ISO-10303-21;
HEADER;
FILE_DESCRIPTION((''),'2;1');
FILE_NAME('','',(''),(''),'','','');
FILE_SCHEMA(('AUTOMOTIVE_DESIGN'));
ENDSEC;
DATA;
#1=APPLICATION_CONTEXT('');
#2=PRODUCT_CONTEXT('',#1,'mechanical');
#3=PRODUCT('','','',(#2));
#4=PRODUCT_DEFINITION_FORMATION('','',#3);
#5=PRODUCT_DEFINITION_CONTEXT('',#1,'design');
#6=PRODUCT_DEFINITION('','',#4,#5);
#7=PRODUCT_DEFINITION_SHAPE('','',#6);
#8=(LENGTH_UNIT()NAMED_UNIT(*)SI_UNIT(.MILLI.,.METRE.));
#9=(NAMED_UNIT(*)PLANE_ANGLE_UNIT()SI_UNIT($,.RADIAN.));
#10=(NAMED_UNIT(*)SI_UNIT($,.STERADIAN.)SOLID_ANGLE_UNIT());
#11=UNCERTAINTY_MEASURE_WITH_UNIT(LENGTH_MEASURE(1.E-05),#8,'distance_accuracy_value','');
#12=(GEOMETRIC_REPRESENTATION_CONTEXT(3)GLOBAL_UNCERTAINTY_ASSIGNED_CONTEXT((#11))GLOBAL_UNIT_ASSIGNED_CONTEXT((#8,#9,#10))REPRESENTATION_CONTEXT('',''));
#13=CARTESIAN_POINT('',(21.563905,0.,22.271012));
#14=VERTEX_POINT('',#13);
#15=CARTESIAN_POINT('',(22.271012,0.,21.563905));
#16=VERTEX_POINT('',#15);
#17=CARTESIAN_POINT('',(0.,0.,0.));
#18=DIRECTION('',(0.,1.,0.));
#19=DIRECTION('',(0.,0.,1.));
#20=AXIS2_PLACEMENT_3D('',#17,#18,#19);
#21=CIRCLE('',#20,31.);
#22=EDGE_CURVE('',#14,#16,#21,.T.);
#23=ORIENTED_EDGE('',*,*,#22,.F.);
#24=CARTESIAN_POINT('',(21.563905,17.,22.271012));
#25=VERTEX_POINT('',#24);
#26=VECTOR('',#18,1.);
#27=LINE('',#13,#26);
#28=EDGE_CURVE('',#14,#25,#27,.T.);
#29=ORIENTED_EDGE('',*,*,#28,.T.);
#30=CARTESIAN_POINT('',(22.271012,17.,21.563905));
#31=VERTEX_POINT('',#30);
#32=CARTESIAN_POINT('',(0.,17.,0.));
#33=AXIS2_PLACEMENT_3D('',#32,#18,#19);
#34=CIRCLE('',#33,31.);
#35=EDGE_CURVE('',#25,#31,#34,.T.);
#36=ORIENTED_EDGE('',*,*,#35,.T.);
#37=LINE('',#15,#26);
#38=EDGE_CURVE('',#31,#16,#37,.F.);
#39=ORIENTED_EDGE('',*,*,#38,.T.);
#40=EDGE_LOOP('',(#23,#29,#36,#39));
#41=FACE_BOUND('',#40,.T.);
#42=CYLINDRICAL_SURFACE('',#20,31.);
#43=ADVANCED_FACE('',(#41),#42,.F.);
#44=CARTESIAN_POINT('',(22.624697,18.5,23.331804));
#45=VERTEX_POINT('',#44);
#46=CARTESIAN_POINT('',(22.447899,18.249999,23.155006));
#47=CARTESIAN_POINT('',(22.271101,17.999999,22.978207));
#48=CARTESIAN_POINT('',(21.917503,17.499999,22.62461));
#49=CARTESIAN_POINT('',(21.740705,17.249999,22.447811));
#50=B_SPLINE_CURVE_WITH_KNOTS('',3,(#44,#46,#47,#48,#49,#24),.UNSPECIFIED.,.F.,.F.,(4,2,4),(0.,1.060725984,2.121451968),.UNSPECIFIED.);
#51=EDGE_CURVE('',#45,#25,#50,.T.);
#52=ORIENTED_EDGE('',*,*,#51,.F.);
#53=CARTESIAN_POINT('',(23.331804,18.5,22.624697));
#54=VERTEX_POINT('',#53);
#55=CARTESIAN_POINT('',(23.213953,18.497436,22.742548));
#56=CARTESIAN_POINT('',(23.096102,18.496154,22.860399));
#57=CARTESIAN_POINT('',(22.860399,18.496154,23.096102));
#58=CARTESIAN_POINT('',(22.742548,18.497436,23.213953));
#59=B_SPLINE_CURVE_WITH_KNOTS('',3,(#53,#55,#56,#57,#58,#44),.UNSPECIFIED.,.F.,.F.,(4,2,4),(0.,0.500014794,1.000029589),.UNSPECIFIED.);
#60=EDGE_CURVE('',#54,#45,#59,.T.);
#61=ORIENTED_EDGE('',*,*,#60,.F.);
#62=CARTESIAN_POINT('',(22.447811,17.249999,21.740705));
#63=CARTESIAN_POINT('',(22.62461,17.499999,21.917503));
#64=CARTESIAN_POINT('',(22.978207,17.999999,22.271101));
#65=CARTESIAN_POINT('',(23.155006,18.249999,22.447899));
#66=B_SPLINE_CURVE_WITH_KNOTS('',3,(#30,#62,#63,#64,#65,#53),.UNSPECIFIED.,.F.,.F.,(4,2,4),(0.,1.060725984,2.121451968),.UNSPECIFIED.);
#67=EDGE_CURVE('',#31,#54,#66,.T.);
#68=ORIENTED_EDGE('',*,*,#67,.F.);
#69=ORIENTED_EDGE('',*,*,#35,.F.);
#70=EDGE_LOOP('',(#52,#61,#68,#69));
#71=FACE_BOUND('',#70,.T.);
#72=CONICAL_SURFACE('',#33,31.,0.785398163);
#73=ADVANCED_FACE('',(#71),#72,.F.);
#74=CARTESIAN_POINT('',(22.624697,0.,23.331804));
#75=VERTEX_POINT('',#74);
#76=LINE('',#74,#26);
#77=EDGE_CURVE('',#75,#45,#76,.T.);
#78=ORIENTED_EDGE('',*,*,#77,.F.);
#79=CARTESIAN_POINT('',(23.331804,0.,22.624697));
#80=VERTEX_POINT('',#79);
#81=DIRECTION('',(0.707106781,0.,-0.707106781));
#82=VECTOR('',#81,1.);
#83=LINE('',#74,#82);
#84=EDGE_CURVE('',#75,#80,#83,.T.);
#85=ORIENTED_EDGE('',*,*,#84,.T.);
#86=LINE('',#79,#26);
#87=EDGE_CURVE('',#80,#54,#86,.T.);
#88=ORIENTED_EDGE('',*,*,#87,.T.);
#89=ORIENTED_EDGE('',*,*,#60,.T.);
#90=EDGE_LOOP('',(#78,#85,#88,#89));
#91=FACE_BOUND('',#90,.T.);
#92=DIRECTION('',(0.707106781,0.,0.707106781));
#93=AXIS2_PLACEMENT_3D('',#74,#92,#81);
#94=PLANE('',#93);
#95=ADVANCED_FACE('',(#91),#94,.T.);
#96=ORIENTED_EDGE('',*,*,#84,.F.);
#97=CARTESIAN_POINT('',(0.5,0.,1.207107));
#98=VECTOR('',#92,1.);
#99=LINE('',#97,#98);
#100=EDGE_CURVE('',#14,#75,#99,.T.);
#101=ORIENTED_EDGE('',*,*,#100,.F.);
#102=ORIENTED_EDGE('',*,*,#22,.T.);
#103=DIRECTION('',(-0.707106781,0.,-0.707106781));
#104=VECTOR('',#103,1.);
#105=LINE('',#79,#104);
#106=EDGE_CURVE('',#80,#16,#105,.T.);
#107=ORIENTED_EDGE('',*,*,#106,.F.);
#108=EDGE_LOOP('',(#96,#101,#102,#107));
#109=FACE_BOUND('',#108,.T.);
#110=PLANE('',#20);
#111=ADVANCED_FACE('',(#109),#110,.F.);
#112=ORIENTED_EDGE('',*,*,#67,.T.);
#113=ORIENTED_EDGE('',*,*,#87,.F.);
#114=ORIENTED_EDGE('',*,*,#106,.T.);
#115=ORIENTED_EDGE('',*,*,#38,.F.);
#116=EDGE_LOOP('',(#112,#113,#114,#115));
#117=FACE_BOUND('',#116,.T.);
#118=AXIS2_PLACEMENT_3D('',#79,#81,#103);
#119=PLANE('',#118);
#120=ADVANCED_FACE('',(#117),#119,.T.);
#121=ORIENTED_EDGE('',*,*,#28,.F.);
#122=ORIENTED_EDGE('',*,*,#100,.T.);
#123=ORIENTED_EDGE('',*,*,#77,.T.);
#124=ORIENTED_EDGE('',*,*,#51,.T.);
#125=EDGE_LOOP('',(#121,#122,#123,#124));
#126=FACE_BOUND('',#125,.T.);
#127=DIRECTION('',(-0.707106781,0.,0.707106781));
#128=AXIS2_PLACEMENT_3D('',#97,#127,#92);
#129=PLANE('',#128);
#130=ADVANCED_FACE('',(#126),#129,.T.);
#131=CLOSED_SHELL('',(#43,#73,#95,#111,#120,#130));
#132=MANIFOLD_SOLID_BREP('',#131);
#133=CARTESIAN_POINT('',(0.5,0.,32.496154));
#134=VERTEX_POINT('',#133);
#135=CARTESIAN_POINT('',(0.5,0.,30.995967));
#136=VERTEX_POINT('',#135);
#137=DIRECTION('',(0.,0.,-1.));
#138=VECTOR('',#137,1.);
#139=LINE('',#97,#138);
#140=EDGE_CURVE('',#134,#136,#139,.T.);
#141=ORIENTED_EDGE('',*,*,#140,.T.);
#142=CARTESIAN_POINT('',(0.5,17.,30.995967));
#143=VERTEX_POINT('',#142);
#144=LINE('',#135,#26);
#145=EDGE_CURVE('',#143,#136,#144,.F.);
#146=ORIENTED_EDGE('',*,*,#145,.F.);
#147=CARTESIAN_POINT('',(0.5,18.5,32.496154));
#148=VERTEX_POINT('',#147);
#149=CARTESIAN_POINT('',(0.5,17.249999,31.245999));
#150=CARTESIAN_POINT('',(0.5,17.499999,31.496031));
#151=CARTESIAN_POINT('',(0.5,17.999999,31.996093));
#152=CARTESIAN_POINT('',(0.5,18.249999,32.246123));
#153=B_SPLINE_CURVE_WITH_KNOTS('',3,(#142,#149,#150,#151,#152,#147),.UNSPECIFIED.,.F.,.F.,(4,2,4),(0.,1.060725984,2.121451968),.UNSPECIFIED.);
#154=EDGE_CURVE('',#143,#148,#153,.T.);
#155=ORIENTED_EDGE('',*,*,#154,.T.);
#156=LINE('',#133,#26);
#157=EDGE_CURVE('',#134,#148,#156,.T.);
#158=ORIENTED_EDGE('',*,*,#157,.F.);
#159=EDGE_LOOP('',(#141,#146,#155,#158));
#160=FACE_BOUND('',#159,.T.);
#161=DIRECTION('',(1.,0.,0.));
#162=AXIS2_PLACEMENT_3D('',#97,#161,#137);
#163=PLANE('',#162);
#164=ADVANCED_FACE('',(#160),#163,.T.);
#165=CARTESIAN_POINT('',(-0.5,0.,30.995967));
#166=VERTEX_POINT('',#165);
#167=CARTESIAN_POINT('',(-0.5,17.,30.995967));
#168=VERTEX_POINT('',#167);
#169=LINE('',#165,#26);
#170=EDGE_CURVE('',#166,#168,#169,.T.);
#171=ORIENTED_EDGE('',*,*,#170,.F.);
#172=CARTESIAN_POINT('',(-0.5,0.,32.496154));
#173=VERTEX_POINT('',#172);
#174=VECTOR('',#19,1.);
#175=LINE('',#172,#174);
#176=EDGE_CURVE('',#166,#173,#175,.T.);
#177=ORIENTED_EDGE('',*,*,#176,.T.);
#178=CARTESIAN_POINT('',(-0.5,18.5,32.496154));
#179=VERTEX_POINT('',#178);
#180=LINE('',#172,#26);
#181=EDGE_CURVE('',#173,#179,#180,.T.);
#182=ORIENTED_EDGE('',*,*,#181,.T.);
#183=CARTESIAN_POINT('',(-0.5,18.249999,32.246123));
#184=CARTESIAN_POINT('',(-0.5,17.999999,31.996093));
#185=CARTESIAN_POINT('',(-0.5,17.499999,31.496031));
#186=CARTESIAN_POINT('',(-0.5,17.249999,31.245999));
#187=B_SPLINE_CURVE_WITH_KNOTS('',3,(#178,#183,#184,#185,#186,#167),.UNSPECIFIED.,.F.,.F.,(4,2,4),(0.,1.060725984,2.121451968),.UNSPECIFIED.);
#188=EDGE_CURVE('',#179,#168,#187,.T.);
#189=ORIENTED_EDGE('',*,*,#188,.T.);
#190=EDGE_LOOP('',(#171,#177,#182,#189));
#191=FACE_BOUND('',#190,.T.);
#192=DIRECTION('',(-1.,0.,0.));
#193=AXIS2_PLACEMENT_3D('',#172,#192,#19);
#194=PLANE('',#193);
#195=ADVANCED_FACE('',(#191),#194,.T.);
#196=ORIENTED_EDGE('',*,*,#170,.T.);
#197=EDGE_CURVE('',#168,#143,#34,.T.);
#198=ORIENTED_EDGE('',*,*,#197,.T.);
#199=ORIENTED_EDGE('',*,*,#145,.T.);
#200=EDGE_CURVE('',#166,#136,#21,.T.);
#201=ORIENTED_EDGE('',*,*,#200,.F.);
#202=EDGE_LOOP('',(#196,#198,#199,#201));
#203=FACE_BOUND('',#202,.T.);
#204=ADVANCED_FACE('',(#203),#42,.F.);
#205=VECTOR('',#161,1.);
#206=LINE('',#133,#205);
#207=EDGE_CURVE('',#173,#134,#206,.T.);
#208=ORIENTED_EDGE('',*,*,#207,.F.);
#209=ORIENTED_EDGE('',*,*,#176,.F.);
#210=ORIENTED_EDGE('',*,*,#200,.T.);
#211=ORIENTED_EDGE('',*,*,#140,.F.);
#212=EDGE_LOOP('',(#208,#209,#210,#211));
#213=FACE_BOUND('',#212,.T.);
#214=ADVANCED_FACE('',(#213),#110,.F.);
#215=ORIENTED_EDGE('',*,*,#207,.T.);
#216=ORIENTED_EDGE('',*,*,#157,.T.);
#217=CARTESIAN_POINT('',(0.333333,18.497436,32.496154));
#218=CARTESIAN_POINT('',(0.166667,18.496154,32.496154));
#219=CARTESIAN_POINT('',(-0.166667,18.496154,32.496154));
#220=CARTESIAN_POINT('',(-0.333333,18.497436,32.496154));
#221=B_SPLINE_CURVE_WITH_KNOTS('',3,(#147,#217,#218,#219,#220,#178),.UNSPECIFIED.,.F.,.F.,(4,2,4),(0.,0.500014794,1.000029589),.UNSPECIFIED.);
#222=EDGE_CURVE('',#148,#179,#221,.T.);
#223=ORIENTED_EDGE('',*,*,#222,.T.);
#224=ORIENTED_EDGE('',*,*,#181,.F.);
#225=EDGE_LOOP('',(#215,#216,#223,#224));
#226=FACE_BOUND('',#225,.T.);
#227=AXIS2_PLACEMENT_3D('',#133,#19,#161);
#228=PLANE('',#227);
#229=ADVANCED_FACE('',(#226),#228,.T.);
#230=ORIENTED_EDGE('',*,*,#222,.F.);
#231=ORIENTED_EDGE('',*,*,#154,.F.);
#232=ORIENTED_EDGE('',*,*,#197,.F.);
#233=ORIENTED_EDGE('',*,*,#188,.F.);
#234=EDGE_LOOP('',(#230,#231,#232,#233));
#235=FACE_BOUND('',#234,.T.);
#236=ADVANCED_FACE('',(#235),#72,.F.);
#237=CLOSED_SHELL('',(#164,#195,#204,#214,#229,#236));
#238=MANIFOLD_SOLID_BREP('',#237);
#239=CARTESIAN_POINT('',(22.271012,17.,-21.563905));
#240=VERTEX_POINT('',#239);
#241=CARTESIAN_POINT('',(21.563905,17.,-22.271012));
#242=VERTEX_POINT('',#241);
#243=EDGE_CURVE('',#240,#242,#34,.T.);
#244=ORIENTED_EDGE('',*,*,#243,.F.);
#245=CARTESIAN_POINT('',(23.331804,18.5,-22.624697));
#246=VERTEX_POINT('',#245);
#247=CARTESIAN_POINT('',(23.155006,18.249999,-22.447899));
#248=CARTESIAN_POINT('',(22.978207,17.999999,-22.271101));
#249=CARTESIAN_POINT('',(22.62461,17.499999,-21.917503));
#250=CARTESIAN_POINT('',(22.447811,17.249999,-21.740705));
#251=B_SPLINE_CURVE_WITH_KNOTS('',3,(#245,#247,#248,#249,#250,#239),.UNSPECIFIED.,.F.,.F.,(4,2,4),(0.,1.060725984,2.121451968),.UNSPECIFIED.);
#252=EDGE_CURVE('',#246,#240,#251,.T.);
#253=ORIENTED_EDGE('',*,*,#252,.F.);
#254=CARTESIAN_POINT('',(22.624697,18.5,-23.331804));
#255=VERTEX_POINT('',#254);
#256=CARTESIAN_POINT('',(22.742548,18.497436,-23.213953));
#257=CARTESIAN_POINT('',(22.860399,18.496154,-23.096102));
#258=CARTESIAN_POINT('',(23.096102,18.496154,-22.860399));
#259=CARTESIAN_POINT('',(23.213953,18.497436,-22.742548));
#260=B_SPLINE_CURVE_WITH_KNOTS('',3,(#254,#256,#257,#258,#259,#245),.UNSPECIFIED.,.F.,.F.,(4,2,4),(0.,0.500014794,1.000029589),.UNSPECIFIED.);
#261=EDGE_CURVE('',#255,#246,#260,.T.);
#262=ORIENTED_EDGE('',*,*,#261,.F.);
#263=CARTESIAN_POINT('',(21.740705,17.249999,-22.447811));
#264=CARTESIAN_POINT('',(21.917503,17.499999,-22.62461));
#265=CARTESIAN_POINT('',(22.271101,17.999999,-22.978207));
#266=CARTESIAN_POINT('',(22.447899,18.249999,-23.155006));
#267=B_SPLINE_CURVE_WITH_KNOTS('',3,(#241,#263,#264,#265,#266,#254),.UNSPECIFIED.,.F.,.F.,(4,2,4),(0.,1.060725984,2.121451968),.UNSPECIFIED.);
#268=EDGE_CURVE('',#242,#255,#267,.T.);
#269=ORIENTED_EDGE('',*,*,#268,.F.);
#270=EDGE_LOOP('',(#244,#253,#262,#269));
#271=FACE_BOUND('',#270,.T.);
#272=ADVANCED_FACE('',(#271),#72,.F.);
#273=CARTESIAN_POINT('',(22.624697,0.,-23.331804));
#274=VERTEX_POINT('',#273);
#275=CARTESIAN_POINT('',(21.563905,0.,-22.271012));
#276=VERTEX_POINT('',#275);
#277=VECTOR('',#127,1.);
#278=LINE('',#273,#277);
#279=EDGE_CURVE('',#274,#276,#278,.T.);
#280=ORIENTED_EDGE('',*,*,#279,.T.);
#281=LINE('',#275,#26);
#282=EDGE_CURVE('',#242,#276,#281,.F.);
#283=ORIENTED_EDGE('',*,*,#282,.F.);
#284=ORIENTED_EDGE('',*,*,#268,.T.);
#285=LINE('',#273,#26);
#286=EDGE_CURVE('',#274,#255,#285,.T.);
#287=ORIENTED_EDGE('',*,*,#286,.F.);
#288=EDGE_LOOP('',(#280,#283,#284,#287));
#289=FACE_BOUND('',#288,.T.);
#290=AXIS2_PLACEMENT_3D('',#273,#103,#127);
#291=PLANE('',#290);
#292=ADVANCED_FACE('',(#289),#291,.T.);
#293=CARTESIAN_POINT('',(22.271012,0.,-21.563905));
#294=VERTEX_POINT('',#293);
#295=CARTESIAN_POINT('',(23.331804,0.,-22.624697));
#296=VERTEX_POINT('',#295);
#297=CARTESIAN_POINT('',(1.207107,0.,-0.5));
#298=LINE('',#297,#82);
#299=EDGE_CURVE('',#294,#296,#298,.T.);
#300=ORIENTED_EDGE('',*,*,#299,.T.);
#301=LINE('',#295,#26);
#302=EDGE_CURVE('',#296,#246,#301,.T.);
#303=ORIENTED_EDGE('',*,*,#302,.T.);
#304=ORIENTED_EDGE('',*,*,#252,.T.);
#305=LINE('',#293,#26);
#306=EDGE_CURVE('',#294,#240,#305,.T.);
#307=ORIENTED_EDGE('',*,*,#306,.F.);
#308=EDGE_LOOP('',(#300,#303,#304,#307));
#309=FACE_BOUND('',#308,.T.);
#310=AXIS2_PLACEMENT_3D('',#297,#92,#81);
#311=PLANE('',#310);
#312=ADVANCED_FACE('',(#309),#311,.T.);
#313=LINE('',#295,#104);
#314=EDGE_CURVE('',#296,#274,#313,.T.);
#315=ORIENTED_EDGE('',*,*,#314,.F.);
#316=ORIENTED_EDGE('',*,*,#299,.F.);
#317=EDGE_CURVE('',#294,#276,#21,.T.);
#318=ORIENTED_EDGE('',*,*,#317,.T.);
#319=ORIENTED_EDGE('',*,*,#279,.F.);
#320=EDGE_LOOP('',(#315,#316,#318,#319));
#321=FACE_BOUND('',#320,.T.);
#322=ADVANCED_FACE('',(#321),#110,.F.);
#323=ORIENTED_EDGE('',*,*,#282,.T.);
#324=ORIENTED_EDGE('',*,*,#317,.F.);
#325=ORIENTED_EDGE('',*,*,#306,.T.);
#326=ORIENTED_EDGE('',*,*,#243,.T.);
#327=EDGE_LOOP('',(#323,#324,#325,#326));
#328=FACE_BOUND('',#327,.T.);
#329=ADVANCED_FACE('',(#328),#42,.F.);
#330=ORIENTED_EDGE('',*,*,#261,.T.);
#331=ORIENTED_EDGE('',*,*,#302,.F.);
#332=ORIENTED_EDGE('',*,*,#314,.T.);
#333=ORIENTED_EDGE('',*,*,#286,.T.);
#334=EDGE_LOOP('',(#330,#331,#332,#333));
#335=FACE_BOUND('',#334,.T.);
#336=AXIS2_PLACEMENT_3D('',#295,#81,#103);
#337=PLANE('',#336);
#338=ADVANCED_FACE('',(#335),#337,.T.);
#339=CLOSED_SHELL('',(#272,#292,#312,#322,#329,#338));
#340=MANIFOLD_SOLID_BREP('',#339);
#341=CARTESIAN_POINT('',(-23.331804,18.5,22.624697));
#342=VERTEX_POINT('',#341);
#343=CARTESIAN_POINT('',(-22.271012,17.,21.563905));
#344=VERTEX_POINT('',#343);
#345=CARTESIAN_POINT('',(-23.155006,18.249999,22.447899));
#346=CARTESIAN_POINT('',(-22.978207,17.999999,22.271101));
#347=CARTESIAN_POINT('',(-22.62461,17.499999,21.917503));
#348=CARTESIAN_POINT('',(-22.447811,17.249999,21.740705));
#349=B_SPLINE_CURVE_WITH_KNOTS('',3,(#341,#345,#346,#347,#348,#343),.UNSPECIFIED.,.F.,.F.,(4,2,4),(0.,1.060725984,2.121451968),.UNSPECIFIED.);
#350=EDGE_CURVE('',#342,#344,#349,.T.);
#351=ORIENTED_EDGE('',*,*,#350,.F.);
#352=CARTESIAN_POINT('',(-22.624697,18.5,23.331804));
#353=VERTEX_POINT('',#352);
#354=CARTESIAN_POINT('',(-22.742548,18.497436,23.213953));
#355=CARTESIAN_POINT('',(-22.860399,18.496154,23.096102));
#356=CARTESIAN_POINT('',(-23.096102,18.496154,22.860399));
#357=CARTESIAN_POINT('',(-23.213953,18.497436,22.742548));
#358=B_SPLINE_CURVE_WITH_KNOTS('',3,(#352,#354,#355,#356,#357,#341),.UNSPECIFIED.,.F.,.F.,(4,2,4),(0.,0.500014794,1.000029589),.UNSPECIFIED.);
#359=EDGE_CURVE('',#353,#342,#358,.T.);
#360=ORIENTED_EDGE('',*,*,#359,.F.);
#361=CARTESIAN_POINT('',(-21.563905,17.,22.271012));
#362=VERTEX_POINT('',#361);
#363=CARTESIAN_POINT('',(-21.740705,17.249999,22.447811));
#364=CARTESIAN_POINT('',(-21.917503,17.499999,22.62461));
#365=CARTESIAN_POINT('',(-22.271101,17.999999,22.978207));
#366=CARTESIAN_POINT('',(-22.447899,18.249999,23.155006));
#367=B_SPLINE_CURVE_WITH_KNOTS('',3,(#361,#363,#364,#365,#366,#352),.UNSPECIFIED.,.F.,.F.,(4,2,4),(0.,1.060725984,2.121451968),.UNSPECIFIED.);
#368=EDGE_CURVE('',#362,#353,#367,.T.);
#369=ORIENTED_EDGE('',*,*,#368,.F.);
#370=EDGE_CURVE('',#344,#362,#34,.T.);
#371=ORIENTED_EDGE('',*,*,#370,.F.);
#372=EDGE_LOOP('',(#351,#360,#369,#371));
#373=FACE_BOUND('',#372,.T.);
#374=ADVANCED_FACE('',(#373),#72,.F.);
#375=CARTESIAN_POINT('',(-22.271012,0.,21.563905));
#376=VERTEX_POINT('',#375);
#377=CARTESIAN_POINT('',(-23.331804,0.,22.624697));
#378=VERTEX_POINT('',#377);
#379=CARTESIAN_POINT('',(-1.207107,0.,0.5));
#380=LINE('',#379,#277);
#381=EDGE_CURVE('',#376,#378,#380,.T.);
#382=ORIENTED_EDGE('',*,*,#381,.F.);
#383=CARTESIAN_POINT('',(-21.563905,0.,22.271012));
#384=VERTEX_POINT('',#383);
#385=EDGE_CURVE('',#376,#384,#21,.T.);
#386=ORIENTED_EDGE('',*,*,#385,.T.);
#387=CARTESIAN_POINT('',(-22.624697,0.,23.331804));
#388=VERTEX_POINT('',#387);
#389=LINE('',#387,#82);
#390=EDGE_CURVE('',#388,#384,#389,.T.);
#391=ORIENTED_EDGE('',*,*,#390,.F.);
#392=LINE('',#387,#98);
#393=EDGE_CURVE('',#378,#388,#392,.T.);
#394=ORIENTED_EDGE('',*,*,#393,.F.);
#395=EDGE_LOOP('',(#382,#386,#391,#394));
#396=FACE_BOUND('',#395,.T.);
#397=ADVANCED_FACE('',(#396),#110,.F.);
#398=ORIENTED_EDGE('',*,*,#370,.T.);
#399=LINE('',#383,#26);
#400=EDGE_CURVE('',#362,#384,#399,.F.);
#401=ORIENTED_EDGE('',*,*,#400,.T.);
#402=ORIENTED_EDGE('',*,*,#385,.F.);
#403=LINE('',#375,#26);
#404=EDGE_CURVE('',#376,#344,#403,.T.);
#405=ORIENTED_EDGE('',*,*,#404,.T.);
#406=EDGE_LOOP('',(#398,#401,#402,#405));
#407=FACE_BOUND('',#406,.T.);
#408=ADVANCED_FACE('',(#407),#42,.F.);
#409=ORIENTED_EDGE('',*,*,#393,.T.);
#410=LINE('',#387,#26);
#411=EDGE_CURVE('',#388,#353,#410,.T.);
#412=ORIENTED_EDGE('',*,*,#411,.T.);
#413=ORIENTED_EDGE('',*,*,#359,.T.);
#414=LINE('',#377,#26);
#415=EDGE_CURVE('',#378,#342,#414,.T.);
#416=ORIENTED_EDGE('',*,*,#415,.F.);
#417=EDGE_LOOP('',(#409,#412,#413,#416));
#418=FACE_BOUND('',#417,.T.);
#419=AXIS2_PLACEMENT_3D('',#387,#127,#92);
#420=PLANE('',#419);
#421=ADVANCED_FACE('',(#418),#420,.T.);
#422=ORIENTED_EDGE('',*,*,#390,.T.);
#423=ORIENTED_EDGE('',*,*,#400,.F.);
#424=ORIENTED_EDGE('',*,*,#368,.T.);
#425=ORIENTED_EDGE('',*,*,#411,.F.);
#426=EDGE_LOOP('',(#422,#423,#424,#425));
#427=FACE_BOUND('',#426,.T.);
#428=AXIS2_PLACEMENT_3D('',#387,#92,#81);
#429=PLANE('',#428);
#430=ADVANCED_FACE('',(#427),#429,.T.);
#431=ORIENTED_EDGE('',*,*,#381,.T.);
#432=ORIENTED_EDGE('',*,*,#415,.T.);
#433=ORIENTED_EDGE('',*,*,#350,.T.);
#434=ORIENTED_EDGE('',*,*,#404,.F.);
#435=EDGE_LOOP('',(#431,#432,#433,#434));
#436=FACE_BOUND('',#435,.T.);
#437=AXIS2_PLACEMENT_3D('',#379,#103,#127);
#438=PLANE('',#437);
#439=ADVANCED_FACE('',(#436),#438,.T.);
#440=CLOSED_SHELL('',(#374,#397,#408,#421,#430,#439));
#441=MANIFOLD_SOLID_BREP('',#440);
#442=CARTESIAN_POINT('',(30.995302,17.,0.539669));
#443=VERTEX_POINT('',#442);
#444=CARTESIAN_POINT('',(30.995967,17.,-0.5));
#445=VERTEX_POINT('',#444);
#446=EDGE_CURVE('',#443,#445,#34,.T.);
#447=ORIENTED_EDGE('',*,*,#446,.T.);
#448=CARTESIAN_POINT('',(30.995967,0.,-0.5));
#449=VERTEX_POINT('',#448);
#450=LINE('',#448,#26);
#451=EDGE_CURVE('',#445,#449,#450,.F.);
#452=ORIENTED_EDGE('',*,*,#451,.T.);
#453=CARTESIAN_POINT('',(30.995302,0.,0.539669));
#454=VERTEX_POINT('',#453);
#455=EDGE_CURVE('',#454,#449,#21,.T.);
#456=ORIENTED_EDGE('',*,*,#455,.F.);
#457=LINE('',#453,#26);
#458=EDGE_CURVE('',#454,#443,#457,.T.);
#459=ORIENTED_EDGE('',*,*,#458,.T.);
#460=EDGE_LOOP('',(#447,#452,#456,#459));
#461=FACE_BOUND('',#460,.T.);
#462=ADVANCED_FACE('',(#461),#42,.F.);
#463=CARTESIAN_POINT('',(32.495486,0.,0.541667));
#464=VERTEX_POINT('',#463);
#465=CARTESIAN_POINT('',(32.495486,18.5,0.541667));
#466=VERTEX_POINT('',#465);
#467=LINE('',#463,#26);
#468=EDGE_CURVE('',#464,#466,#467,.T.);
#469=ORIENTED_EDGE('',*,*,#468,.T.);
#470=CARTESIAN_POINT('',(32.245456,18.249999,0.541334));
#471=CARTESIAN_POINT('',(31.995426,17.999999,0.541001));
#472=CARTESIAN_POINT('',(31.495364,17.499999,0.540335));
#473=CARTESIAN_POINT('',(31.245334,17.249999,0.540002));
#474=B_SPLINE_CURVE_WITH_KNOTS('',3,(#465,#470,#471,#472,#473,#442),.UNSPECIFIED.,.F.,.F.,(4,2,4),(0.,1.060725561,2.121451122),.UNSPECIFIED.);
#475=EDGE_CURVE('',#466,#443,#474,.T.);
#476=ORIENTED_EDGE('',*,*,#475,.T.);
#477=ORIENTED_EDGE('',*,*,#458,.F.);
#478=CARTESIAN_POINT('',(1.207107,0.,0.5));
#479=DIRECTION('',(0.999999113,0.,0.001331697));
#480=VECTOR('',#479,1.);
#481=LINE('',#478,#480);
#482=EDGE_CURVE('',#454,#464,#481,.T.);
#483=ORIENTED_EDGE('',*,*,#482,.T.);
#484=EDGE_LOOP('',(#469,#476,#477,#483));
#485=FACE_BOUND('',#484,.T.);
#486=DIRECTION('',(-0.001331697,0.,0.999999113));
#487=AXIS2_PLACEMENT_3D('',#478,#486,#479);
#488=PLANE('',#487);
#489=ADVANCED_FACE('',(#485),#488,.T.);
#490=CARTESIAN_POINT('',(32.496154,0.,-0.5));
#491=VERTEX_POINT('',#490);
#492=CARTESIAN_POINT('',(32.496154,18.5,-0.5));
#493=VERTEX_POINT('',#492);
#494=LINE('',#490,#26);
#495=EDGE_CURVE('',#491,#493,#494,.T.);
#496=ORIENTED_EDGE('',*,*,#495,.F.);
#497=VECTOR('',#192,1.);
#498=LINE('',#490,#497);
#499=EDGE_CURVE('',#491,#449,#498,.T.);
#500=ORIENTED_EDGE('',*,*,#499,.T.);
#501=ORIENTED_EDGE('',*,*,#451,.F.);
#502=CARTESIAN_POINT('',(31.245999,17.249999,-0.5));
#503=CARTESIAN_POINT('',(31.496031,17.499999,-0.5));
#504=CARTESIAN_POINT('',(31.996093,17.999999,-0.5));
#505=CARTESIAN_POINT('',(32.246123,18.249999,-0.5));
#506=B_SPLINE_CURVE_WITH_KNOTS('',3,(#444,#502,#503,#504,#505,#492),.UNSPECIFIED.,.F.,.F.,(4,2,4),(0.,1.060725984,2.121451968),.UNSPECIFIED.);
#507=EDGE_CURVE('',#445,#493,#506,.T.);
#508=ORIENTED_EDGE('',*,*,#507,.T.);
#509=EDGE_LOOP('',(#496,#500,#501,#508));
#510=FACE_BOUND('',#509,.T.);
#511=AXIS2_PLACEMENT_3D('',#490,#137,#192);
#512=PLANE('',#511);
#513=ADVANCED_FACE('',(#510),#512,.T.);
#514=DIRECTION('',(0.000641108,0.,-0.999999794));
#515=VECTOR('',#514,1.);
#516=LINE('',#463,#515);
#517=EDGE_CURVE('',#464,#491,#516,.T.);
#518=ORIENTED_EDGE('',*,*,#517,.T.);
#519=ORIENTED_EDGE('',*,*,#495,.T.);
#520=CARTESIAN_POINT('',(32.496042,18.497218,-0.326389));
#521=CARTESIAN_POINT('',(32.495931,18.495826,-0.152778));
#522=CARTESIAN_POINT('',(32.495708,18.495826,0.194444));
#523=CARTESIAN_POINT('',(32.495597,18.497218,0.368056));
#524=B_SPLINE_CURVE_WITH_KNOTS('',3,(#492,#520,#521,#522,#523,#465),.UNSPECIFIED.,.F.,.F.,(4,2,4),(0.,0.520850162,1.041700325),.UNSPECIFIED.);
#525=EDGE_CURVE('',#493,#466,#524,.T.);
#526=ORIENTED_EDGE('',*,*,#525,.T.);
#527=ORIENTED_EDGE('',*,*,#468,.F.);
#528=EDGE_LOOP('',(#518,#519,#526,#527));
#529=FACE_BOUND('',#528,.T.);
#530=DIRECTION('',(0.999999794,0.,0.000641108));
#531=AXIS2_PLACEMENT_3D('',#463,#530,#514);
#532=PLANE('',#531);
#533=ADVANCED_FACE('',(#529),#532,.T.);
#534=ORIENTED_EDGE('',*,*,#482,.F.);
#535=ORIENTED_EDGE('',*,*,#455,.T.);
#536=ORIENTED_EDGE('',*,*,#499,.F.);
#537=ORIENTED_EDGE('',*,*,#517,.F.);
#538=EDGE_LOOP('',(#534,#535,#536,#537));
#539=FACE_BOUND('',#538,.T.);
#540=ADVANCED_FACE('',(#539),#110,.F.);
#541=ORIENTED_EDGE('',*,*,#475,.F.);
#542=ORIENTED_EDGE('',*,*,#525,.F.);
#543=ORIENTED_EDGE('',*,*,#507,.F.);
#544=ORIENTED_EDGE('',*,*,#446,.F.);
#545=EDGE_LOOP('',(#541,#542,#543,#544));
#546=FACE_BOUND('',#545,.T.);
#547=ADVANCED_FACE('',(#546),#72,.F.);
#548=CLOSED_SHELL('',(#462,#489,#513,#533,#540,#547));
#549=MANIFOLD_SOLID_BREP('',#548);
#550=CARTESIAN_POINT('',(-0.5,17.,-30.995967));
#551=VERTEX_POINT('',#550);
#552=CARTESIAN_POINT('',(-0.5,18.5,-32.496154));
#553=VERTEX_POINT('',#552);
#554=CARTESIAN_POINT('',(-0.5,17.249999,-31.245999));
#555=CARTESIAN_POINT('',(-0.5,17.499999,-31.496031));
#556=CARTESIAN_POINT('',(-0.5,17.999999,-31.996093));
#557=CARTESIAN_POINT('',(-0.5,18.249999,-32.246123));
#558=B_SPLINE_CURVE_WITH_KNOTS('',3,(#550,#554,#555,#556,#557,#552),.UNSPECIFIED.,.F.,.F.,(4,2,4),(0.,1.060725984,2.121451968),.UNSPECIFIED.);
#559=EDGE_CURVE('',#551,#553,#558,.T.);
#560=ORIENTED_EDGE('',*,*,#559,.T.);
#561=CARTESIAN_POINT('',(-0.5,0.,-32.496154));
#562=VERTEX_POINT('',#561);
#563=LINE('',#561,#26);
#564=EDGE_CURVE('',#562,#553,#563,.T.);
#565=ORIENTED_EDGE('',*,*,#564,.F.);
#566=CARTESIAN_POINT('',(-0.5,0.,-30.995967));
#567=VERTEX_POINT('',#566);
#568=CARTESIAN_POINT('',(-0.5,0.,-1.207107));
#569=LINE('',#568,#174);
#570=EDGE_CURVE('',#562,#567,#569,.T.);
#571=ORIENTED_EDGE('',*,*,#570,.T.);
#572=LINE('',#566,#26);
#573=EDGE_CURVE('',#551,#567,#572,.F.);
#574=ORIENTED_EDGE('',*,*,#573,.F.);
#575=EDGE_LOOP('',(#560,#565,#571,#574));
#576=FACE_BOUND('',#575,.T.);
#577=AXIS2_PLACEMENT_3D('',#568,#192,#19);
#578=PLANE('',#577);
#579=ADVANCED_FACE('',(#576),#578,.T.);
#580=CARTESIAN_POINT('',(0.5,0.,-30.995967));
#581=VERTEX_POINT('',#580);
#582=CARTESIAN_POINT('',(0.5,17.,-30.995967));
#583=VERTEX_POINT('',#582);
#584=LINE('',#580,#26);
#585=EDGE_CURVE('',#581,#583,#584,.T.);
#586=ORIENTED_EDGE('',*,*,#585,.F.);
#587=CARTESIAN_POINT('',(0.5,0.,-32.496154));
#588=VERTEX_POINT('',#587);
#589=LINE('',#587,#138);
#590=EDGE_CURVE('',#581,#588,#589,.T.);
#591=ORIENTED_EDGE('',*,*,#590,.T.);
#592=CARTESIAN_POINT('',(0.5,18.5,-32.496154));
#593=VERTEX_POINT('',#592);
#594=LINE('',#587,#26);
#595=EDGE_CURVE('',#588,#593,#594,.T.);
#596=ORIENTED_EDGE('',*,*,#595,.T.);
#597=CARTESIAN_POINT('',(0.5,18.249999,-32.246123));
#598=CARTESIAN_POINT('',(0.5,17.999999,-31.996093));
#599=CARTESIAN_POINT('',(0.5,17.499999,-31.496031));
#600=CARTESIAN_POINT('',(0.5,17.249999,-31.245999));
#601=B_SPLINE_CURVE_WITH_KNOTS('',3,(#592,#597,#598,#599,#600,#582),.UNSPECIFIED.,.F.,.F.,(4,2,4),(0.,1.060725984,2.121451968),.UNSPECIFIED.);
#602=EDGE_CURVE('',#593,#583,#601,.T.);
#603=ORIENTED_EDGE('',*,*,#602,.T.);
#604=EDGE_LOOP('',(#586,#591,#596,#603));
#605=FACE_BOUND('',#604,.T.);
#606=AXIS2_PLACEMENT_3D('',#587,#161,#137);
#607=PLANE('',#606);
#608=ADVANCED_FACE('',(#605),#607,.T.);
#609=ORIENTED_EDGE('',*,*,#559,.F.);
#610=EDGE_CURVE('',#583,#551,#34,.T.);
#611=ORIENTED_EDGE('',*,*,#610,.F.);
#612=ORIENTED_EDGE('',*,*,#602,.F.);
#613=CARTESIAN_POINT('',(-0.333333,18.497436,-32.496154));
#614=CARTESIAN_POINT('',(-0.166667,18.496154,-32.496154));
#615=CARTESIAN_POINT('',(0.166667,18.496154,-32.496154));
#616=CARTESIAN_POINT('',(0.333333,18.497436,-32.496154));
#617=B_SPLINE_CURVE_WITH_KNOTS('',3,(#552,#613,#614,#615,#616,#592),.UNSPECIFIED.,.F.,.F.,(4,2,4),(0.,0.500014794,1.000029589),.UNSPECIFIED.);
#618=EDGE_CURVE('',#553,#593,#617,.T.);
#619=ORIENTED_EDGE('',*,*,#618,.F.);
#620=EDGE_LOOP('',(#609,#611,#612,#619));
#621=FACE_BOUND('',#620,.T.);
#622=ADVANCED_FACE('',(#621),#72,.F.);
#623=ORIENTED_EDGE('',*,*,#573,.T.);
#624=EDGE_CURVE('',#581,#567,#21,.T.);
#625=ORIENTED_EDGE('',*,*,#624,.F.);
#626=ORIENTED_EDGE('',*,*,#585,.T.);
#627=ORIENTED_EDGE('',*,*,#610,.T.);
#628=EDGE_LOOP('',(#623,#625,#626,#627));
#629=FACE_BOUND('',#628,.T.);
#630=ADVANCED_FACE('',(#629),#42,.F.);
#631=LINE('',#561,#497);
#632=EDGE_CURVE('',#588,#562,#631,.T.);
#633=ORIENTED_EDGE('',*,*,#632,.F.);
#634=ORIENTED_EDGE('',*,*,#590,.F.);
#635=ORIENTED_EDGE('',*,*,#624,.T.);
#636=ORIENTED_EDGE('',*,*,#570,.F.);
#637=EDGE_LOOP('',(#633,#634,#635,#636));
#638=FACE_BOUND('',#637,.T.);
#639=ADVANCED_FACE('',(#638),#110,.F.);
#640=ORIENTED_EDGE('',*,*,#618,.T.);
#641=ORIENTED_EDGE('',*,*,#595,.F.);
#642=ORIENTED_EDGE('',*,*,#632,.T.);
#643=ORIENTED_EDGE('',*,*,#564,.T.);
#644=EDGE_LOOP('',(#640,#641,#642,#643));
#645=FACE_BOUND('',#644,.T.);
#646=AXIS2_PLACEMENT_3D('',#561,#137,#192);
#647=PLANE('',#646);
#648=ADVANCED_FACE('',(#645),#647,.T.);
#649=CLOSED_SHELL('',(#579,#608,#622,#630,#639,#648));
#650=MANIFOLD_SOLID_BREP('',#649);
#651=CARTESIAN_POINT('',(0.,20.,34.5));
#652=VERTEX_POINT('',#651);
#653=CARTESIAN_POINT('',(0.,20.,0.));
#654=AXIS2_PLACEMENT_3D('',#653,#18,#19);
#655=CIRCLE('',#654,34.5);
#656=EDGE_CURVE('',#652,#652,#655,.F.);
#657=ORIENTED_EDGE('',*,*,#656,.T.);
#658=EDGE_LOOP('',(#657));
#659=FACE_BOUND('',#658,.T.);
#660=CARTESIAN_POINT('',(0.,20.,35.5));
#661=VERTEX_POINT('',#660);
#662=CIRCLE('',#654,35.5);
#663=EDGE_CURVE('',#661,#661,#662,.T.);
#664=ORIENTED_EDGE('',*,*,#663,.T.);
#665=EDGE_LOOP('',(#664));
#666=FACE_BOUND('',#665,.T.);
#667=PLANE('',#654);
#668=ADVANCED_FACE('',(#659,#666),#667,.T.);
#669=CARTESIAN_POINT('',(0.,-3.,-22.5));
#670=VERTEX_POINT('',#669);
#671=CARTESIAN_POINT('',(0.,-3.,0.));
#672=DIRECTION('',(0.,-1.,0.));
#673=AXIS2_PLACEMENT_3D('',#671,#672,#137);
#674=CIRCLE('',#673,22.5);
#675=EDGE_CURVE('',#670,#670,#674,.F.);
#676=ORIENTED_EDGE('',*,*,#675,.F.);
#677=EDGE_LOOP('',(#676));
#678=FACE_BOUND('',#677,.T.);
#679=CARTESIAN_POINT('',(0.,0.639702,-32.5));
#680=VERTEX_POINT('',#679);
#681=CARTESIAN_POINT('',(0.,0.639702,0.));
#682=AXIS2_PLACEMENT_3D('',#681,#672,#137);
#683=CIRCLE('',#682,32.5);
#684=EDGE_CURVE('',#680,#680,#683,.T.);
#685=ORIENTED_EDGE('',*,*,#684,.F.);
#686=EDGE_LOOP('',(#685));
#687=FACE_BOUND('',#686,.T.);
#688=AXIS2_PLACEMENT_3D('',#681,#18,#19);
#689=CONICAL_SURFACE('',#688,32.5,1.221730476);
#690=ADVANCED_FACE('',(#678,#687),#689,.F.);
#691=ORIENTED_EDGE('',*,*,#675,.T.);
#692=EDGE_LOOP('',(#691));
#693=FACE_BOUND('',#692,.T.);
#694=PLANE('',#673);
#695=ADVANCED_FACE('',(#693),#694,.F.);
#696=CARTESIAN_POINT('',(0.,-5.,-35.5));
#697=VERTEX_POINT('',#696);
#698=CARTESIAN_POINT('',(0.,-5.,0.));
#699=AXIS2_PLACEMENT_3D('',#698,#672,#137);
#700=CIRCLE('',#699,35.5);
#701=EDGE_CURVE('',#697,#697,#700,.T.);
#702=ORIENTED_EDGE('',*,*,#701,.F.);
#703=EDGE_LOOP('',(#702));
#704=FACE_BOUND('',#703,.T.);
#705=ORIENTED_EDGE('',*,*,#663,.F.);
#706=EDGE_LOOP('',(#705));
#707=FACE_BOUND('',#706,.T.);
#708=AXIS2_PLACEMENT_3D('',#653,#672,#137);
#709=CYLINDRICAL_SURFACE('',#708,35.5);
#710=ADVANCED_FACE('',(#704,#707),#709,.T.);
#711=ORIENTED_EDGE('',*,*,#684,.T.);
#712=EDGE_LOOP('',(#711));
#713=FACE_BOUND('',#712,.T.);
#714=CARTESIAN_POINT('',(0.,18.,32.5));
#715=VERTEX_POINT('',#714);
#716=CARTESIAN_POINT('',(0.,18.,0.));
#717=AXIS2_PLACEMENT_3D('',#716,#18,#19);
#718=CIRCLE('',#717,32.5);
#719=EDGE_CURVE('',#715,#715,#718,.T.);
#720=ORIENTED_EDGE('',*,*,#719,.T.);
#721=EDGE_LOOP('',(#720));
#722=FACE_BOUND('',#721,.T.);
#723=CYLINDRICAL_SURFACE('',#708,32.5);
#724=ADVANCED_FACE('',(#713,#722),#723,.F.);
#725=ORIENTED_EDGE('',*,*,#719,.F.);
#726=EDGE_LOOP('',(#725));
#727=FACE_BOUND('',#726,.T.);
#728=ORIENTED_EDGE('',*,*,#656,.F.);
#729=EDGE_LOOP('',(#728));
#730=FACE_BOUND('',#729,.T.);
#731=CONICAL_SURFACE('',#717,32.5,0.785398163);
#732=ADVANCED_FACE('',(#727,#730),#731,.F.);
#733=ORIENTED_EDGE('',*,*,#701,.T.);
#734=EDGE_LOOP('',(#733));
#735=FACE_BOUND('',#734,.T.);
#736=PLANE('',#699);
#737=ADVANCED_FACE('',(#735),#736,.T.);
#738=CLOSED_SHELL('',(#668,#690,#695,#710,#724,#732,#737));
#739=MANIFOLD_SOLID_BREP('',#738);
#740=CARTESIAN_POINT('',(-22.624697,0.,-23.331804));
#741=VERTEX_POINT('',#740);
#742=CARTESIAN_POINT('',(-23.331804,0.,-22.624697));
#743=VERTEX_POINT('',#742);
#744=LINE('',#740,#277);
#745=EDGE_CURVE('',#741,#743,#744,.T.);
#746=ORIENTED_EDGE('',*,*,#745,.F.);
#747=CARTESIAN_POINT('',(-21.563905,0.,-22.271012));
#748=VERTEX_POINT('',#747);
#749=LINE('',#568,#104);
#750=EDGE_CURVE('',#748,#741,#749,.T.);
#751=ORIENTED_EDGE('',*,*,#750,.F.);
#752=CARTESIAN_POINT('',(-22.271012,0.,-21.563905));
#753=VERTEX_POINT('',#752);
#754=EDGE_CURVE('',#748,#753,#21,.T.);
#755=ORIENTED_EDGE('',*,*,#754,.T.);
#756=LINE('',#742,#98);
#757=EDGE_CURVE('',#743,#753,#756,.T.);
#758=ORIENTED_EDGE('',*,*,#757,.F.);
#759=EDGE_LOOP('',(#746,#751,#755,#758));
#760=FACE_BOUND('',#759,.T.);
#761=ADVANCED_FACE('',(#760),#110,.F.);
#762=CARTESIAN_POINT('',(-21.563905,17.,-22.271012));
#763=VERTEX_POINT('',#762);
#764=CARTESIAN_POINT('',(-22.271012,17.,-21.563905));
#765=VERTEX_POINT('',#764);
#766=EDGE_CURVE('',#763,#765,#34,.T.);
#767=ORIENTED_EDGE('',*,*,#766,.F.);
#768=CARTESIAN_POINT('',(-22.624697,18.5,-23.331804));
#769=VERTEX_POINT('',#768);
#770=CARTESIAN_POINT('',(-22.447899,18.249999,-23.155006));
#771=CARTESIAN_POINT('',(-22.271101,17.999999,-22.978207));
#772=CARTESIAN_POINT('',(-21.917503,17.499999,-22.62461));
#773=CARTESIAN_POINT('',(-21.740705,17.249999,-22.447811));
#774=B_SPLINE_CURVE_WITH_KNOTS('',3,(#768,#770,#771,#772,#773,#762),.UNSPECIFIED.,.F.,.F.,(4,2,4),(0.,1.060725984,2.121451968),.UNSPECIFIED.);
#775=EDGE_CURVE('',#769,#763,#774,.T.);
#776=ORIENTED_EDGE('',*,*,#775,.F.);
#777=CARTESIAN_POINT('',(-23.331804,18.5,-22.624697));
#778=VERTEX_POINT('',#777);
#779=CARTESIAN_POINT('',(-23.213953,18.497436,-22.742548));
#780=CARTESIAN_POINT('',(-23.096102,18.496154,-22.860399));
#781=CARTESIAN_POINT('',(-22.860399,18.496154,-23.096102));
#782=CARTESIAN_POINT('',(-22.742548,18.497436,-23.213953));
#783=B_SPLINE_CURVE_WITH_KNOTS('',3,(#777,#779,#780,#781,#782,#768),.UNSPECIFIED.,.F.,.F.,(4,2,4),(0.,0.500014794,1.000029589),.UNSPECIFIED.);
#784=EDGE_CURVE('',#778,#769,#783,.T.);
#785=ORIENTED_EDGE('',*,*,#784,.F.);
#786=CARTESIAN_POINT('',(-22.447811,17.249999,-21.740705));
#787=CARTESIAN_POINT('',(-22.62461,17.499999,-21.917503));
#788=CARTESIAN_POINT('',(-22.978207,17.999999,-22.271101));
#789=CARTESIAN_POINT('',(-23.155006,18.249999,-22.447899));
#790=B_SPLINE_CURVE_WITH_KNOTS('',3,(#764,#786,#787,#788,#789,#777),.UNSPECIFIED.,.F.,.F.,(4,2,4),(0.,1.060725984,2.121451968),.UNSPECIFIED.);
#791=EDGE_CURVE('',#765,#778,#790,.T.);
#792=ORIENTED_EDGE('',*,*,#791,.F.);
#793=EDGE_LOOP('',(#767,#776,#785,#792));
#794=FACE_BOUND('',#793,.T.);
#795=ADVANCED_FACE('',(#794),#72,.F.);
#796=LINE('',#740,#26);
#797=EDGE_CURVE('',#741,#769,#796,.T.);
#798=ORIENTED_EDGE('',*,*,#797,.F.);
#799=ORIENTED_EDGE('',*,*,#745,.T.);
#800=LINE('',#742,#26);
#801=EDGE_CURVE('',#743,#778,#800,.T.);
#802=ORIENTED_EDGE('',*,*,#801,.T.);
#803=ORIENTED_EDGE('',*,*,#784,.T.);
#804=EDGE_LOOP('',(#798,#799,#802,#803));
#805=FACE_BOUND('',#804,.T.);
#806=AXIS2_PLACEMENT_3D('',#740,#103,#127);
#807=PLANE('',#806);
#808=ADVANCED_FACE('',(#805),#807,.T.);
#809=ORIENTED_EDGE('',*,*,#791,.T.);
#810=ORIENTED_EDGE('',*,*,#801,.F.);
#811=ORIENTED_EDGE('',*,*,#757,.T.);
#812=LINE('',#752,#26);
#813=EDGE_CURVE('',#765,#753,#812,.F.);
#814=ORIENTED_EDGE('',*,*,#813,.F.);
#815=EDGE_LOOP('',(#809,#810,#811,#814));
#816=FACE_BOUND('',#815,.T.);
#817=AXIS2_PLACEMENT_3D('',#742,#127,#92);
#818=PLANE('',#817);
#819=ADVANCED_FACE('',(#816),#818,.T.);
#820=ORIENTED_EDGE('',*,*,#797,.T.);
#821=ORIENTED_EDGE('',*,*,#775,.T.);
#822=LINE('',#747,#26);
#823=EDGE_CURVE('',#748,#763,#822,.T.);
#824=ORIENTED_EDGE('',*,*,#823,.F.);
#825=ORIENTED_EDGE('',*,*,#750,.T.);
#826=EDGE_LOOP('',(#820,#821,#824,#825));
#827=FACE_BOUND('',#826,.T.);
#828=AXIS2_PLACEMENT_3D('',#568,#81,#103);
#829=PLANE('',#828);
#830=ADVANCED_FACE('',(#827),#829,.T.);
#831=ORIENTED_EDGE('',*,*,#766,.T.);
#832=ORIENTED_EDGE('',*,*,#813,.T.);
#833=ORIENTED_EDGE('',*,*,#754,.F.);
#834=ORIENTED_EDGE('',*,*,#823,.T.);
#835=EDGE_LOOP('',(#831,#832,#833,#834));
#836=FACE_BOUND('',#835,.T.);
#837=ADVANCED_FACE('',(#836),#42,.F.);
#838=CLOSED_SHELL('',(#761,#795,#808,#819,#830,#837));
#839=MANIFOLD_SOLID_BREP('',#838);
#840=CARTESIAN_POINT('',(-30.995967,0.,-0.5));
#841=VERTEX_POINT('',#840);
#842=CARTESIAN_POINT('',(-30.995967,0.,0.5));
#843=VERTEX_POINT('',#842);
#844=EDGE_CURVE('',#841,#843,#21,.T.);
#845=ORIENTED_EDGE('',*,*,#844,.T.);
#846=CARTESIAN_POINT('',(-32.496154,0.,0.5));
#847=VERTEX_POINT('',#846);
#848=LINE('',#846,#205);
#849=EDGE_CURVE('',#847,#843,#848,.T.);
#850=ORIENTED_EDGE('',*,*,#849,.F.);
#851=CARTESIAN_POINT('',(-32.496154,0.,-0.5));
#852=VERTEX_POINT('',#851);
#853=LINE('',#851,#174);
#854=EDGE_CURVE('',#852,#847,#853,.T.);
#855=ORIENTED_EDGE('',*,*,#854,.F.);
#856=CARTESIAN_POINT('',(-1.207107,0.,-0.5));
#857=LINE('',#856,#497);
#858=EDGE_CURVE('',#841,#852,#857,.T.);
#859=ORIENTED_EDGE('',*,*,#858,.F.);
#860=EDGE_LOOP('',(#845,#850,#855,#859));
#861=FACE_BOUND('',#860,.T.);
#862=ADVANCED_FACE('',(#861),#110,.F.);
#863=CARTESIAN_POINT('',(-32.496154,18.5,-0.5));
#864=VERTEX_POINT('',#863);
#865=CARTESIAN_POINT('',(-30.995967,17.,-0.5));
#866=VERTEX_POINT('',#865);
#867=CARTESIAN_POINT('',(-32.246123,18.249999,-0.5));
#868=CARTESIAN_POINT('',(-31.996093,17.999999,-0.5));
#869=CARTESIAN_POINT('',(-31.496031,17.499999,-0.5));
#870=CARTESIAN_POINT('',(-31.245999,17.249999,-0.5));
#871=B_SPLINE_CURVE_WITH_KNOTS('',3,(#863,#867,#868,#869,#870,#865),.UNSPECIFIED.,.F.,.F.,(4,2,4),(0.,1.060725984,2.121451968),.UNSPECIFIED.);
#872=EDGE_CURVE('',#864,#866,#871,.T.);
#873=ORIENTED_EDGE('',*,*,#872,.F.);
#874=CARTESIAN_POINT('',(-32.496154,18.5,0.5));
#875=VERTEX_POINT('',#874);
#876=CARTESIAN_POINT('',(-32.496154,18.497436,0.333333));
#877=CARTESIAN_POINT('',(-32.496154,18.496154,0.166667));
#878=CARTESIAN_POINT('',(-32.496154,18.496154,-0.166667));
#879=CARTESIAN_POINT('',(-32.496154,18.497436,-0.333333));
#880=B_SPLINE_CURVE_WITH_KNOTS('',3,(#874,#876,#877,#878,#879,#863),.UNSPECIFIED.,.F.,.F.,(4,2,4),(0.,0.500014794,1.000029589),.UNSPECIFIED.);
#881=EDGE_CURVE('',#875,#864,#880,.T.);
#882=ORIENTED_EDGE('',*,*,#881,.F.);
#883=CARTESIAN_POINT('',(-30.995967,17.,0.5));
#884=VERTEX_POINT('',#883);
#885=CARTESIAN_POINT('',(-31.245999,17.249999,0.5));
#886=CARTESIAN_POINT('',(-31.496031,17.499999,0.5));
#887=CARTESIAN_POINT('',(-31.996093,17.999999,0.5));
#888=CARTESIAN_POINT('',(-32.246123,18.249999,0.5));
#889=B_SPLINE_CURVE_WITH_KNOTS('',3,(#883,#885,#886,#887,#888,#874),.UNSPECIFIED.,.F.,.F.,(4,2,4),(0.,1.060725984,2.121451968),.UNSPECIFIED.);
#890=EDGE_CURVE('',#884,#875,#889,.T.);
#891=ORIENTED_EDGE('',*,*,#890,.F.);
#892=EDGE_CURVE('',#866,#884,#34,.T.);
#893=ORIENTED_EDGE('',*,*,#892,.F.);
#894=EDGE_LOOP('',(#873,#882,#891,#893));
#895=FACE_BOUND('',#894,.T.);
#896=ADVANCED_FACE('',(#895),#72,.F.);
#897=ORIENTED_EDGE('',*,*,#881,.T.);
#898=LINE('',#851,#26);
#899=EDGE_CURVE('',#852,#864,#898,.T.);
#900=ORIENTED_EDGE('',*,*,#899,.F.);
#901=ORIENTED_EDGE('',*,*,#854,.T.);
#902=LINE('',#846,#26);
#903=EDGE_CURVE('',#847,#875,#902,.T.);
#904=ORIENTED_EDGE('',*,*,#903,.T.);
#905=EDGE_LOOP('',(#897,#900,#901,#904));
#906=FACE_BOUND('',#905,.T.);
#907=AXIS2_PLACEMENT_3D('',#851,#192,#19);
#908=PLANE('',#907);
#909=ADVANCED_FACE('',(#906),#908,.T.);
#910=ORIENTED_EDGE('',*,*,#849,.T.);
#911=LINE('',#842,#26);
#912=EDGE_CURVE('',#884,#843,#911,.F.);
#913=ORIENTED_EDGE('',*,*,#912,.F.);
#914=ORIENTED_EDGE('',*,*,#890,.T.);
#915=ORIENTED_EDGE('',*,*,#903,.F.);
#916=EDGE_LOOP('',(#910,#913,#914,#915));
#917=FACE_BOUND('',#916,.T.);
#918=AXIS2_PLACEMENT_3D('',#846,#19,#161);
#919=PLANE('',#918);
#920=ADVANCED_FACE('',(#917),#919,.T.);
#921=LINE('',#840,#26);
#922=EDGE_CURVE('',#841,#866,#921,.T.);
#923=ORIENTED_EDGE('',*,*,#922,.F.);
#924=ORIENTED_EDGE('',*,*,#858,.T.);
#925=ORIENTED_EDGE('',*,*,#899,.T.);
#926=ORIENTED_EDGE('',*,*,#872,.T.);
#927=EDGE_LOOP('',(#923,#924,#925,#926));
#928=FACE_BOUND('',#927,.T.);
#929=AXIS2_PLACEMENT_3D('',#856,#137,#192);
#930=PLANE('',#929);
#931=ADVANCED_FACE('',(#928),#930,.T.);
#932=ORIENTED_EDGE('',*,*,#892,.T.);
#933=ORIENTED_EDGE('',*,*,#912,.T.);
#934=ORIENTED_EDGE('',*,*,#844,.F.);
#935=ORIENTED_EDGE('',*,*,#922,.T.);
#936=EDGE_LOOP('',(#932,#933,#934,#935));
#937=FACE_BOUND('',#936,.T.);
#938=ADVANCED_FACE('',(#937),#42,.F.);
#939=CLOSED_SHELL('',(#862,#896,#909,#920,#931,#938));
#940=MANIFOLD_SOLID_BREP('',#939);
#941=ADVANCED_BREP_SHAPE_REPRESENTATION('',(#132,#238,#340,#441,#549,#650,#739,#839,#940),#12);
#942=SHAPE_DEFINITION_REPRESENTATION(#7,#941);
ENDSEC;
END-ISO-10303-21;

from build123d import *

# Parameters (mm, degrees)
SKETCH1_R           = 35.5
SKETCH1_R_2         = 32.5
BOSS_EXTRUDE1_DEPTH = 20
BOSS_EXTRUDE2_DEPTH = 20
SKETCH3_R           = 31
CUT_EXTRUDE1_DEPTH  = 20
CHAMFER1_SIZE       = 2
CHAMFER2_SIZE       = 3
CHAMFER3_SIZE       = 3
CHAMFER4_SIZE       = 3
CHAMFER5_SIZE       = 3
CHAMFER6_SIZE       = 3
CHAMFER7_SIZE       = 3
CHAMFER8_SIZE       = 3
CHAMFER9_SIZE       = 3
BOSS_EXTRUDE5_START = 3
SKETCH4_R           = 35.5
SKETCH4_R_2         = 32.5
BOSS_EXTRUDE5_DEPTH = 3
BOSS_EXTRUDE6_START = 2
SKETCH5_R           = 35.5
BOSS_EXTRUDE6_DEPTH = 2


with BuildPart() as part:
    # Sketch1 → Boss-Extrude1 (new body)
    with BuildSketch(Plane(origin=(0, 0, 0), x_dir=(1, 0, 0), z_dir=(0, 1, 0))):
        with Locations(Location((0, 0, 0), (0, 0, 270))):
            Circle(SKETCH1_R)
        with Locations(Location((0, 0, 0), (0, 0, 270))):
            Circle(SKETCH1_R_2, mode=Mode.SUBTRACT)
    extrude(amount=BOSS_EXTRUDE1_DEPTH)

    # Chamfer1
    chamfer1_edges = [part.edges().sort_by_distance(p)[0] for p in [
        (0, 20, -32.5),
    ]]
    chamfer(chamfer1_edges, length=CHAMFER1_SIZE)

    # Sketch4 → Boss-Extrude5 (add)
    with BuildSketch(Plane.XZ.offset(BOSS_EXTRUDE5_START)):
        with Locations(Location((0, 0, 0), (0, 0, 270))):
            Circle(SKETCH4_R)
        with Locations(Location((0, 0, 0), (0, 0, 270))):
            Circle(SKETCH4_R_2, mode=Mode.SUBTRACT)
    extrude(amount=-BOSS_EXTRUDE5_DEPTH)

    # Sketch5 → Boss-Extrude6 (add)
    with BuildSketch(Plane.XZ.offset(3).offset(BOSS_EXTRUDE6_START)):
        with Locations(Location((0, 0, 0), (0, 0, 270))):
            Circle(SKETCH5_R)
    extrude(amount=-BOSS_EXTRUDE6_DEPTH)

    # Chamfer10
    # the kernel refuses this chamfer: 10, 3.639702343 mm, written as the material it adds along each edge
    with BuildSketch(Plane(origin=(0, -3, 0), x_dir=(0, 0, -1), z_dir=(-1, 0, 0))) as chamfer10_piece_1:
        with BuildLine():
            Line((32.875877048, -3.7765104), (22.124122952, 0.136808057))
            Line((22.124122952, 0.136808057), (22.124122952, 0.336808057))
            ThreePointArc((22.124122952, 0.336808057), (27.312061476, 0.2), (32.5, 0.2))
            Line((32.5, 0.2), (32.7, 0))
            ThreePointArc((32.7, 0), (32.7, -1.8882552), (33.075877048, -3.7765104))
            Line((33.075877048, -3.7765104), (32.875877048, -3.7765104))
        make_face()
    revolve(axis=Axis((0, -3, 0), (0, -1, 0)))


with BuildPart() as body_2:
    # Sketch2 → Boss-Extrude2 (new body)
    with BuildSketch(Plane(origin=(0, 20, 0), x_dir=(1, 0, 0), z_dir=(0, 1, 0))):
        Polygon((22.624697196, 23.331803977), (0.5, 1.207106781), (0.5, 32.496153619), (-0.5, 32.496153619), (-0.5, 1.207106781), (-22.624697196, 23.331803977), (-23.331803977, 22.624697196), (-1.207106781, 0.5), (-32.496153619, 0.5), (-32.496153619, -0.5), (-1.207106781, -0.5), (-23.331803977, -22.624697196), (-22.624697196, -23.331803977), (-0.5, -1.207106781), (-0.5, -32.496153619), (0.5, -32.496153619), (0.5, -1.207106781), (22.624697196, -23.331803977), (23.331803977, -22.624697196), (1.207106781, -0.5), (32.495485798, -0.541666667), (32.496153619, 0.5), (1.207106781, 0.5), (23.331803977, 22.624697196), align=None)
    extrude(amount=-BOSS_EXTRUDE2_DEPTH)

    # Sketch3 → Cut-Extrude1 (cut)
    with BuildSketch(Plane(origin=(0, 20, 0), x_dir=(1, 0, 0), z_dir=(0, 1, 0))):
        Circle(SKETCH3_R)
    extrude(amount=-CUT_EXTRUDE1_DEPTH, mode=Mode.SUBTRACT)


with BuildPart() as cut_extrude1_piece_1:
    # of the separate pieces the step leaves, piece 1, a body of its own (cut_extrude1_pieces)
    add(body_2.part.solids().sort_by_distance((32.496153619, 20, -0.5))[0])

    # Chamfer4
    # the kernel refuses this chamfer: 3 mm, written as the material it takes off along each edge
    with BuildSketch(Plane(origin=(0, 20, 0), x_dir=(0.9650918920852939, 0, -0.26191151145229885), z_dir=(-0.26191151145229885, 0, -0.9650918920852939))) as chamfer4_piece_1:
        Polygon((31 + CHAMFER4_SIZE, 0), (31, CHAMFER4_SIZE), (31, 0), align=None)
    revolve(axis=Axis((0, 20, 0), (0, -1, 0)), revolution_arc=30.440357856, mode=Mode.SUBTRACT)


with BuildPart() as cut_extrude1_piece_2:
    # of the separate pieces the step leaves, piece 2, a body of its own (cut_extrude1_pieces)
    add(body_2.part.solids().sort_by_distance((23.331803977, 20, 22.624697196))[0])

    # Chamfer5
    # the kernel refuses this chamfer: 3 mm, written as the material it takes off along each edge
    with BuildSketch(Plane(origin=(0, 20, 0), x_dir=(0.4972236185024376, 0, 0.8676224254843476), z_dir=(-0.8676224254843476, 0, 0.4972236185024376))) as chamfer5_piece_1:
        Polygon((31 + CHAMFER5_SIZE, 0), (31, -CHAMFER5_SIZE), (31, 0), align=None)
    revolve(axis=Axis((0, 20, 0), (0, 1, 0)), revolution_arc=30.367029113, mode=Mode.SUBTRACT)


with BuildPart() as cut_extrude1_piece_3:
    # of the separate pieces the step leaves, piece 3, a body of its own (cut_extrude1_pieces)
    add(body_2.part.solids().sort_by_distance((-21.563905404, 20, -22.271012185))[0])

    # Chamfer9
    # the kernel refuses this chamfer: 3 mm, written as the material it takes off along each edge
    with BuildSketch(Plane(origin=(0, 20, 0), x_dir=(-0.4972236185024667, 0, -0.867622425484331), z_dir=(0.867622425484331, 0, -0.4972236185024667))) as chamfer9_piece_1:
        Polygon((31 + CHAMFER9_SIZE, 0), (31, -CHAMFER9_SIZE), (31, 0), align=None)
    revolve(axis=Axis((0, 20, 0), (0, 1, 0)), revolution_arc=30.367029113, mode=Mode.SUBTRACT)


with BuildPart() as cut_extrude1_piece_4:
    # of the separate pieces the step leaves, piece 4, a body of its own (cut_extrude1_pieces)
    add(body_2.part.solids().sort_by_distance((-30.99596748, 20, -0.5))[0])

    # Chamfer8
    # the kernel refuses this chamfer: 3 mm, written as the material it takes off along each edge
    with BuildSketch(Plane(origin=(0, 20, 0), x_dir=(-0.965091892978687, 0, -0.2619115081603219), z_dir=(0.2619115081603219, 0, -0.965091892978687))) as chamfer8_piece_1:
        Polygon((31 + CHAMFER8_SIZE, 0), (31, -CHAMFER8_SIZE), (31, 0), align=None)
    revolve(axis=Axis((0, 20, 0), (0, 1, 0)), revolution_arc=30.367029113, mode=Mode.SUBTRACT)


with BuildPart() as cut_extrude1_piece_5:
    # of the separate pieces the step leaves, piece 5, a body of its own (cut_extrude1_pieces)
    add(body_2.part.solids().sort_by_distance((0.5, 20, -30.99596748))[0])

    # Chamfer2
    # the kernel refuses this chamfer: 3 mm, written as the material it takes off along each edge
    with BuildSketch(Plane(origin=(0, 20, 0), x_dir=(0.26191150816029163, 0, -0.9650918929786952), z_dir=(0.9650918929786952, 0, 0.26191150816029163))) as chamfer2_piece_1:
        Polygon((31 + CHAMFER2_SIZE, 0), (31, -CHAMFER2_SIZE), (31, 0), align=None)
    revolve(axis=Axis((0, 20, 0), (0, 1, 0)), revolution_arc=30.367029113, mode=Mode.SUBTRACT)


with BuildPart() as cut_extrude1_piece_6:
    # of the separate pieces the step leaves, piece 6, a body of its own (cut_extrude1_pieces)
    add(body_2.part.solids().sort_by_distance((0.5, 20, 32.496153619))[0])

    # Chamfer6
    # the kernel refuses this chamfer: 3 mm, written as the material it takes off along each edge
    with BuildSketch(Plane(origin=(0, 20, 0), x_dir=(-0.26191150816025044, 0, 0.9650918929787065), z_dir=(-0.9650918929787065, 0, -0.26191150816025044))) as chamfer6_piece_1:
        Polygon((31 + CHAMFER6_SIZE, 0), (31, -CHAMFER6_SIZE), (31, 0), align=None)
    revolve(axis=Axis((0, 20, 0), (0, 1, 0)), revolution_arc=30.367029113, mode=Mode.SUBTRACT)


with BuildPart() as cut_extrude1_piece_7:
    # of the separate pieces the step leaves, piece 7, a body of its own (cut_extrude1_pieces)
    add(body_2.part.solids().sort_by_distance((-22.271012185, 20, 21.563905404))[0])

    # Chamfer7
    # the kernel refuses this chamfer: 3 mm, written as the material it takes off along each edge
    with BuildSketch(Plane(origin=(0, 20, 0), x_dir=(-0.867622425484322, 0, 0.49722361850248237), z_dir=(-0.49722361850248237, 0, -0.867622425484322))) as chamfer7_piece_1:
        Polygon((31 + CHAMFER7_SIZE, 0), (31, -CHAMFER7_SIZE), (31, 0), align=None)
    revolve(axis=Axis((0, 20, 0), (0, 1, 0)), revolution_arc=30.367029113, mode=Mode.SUBTRACT)


with BuildPart() as cut_extrude1_piece_8:
    # of the separate pieces the step leaves, piece 8, a body of its own (cut_extrude1_pieces)
    add(body_2.part.solids().sort_by_distance((22.624697196, 20, -23.331803977))[0])

    # Chamfer3
    # the kernel refuses this chamfer: 3 mm, written as the material it takes off along each edge
    with BuildSketch(Plane(origin=(0, 20, 0), x_dir=(0.8676224254843233, 0, -0.49722361850248004), z_dir=(0.49722361850248004, 0, 0.8676224254843233))) as chamfer3_piece_1:
        Polygon((31, -CHAMFER3_SIZE), (31 + CHAMFER3_SIZE, 0), (31, 0), align=None)
    revolve(axis=Axis((0, 20, 0), (0, 1, 0)), revolution_arc=30.367029113, mode=Mode.SUBTRACT)


solid = Compound([part.part, cut_extrude1_piece_1.part, cut_extrude1_piece_2.part, cut_extrude1_piece_3.part, cut_extrude1_piece_4.part, cut_extrude1_piece_5.part, cut_extrude1_piece_6.part, cut_extrude1_piece_7.part, cut_extrude1_piece_8.part])
